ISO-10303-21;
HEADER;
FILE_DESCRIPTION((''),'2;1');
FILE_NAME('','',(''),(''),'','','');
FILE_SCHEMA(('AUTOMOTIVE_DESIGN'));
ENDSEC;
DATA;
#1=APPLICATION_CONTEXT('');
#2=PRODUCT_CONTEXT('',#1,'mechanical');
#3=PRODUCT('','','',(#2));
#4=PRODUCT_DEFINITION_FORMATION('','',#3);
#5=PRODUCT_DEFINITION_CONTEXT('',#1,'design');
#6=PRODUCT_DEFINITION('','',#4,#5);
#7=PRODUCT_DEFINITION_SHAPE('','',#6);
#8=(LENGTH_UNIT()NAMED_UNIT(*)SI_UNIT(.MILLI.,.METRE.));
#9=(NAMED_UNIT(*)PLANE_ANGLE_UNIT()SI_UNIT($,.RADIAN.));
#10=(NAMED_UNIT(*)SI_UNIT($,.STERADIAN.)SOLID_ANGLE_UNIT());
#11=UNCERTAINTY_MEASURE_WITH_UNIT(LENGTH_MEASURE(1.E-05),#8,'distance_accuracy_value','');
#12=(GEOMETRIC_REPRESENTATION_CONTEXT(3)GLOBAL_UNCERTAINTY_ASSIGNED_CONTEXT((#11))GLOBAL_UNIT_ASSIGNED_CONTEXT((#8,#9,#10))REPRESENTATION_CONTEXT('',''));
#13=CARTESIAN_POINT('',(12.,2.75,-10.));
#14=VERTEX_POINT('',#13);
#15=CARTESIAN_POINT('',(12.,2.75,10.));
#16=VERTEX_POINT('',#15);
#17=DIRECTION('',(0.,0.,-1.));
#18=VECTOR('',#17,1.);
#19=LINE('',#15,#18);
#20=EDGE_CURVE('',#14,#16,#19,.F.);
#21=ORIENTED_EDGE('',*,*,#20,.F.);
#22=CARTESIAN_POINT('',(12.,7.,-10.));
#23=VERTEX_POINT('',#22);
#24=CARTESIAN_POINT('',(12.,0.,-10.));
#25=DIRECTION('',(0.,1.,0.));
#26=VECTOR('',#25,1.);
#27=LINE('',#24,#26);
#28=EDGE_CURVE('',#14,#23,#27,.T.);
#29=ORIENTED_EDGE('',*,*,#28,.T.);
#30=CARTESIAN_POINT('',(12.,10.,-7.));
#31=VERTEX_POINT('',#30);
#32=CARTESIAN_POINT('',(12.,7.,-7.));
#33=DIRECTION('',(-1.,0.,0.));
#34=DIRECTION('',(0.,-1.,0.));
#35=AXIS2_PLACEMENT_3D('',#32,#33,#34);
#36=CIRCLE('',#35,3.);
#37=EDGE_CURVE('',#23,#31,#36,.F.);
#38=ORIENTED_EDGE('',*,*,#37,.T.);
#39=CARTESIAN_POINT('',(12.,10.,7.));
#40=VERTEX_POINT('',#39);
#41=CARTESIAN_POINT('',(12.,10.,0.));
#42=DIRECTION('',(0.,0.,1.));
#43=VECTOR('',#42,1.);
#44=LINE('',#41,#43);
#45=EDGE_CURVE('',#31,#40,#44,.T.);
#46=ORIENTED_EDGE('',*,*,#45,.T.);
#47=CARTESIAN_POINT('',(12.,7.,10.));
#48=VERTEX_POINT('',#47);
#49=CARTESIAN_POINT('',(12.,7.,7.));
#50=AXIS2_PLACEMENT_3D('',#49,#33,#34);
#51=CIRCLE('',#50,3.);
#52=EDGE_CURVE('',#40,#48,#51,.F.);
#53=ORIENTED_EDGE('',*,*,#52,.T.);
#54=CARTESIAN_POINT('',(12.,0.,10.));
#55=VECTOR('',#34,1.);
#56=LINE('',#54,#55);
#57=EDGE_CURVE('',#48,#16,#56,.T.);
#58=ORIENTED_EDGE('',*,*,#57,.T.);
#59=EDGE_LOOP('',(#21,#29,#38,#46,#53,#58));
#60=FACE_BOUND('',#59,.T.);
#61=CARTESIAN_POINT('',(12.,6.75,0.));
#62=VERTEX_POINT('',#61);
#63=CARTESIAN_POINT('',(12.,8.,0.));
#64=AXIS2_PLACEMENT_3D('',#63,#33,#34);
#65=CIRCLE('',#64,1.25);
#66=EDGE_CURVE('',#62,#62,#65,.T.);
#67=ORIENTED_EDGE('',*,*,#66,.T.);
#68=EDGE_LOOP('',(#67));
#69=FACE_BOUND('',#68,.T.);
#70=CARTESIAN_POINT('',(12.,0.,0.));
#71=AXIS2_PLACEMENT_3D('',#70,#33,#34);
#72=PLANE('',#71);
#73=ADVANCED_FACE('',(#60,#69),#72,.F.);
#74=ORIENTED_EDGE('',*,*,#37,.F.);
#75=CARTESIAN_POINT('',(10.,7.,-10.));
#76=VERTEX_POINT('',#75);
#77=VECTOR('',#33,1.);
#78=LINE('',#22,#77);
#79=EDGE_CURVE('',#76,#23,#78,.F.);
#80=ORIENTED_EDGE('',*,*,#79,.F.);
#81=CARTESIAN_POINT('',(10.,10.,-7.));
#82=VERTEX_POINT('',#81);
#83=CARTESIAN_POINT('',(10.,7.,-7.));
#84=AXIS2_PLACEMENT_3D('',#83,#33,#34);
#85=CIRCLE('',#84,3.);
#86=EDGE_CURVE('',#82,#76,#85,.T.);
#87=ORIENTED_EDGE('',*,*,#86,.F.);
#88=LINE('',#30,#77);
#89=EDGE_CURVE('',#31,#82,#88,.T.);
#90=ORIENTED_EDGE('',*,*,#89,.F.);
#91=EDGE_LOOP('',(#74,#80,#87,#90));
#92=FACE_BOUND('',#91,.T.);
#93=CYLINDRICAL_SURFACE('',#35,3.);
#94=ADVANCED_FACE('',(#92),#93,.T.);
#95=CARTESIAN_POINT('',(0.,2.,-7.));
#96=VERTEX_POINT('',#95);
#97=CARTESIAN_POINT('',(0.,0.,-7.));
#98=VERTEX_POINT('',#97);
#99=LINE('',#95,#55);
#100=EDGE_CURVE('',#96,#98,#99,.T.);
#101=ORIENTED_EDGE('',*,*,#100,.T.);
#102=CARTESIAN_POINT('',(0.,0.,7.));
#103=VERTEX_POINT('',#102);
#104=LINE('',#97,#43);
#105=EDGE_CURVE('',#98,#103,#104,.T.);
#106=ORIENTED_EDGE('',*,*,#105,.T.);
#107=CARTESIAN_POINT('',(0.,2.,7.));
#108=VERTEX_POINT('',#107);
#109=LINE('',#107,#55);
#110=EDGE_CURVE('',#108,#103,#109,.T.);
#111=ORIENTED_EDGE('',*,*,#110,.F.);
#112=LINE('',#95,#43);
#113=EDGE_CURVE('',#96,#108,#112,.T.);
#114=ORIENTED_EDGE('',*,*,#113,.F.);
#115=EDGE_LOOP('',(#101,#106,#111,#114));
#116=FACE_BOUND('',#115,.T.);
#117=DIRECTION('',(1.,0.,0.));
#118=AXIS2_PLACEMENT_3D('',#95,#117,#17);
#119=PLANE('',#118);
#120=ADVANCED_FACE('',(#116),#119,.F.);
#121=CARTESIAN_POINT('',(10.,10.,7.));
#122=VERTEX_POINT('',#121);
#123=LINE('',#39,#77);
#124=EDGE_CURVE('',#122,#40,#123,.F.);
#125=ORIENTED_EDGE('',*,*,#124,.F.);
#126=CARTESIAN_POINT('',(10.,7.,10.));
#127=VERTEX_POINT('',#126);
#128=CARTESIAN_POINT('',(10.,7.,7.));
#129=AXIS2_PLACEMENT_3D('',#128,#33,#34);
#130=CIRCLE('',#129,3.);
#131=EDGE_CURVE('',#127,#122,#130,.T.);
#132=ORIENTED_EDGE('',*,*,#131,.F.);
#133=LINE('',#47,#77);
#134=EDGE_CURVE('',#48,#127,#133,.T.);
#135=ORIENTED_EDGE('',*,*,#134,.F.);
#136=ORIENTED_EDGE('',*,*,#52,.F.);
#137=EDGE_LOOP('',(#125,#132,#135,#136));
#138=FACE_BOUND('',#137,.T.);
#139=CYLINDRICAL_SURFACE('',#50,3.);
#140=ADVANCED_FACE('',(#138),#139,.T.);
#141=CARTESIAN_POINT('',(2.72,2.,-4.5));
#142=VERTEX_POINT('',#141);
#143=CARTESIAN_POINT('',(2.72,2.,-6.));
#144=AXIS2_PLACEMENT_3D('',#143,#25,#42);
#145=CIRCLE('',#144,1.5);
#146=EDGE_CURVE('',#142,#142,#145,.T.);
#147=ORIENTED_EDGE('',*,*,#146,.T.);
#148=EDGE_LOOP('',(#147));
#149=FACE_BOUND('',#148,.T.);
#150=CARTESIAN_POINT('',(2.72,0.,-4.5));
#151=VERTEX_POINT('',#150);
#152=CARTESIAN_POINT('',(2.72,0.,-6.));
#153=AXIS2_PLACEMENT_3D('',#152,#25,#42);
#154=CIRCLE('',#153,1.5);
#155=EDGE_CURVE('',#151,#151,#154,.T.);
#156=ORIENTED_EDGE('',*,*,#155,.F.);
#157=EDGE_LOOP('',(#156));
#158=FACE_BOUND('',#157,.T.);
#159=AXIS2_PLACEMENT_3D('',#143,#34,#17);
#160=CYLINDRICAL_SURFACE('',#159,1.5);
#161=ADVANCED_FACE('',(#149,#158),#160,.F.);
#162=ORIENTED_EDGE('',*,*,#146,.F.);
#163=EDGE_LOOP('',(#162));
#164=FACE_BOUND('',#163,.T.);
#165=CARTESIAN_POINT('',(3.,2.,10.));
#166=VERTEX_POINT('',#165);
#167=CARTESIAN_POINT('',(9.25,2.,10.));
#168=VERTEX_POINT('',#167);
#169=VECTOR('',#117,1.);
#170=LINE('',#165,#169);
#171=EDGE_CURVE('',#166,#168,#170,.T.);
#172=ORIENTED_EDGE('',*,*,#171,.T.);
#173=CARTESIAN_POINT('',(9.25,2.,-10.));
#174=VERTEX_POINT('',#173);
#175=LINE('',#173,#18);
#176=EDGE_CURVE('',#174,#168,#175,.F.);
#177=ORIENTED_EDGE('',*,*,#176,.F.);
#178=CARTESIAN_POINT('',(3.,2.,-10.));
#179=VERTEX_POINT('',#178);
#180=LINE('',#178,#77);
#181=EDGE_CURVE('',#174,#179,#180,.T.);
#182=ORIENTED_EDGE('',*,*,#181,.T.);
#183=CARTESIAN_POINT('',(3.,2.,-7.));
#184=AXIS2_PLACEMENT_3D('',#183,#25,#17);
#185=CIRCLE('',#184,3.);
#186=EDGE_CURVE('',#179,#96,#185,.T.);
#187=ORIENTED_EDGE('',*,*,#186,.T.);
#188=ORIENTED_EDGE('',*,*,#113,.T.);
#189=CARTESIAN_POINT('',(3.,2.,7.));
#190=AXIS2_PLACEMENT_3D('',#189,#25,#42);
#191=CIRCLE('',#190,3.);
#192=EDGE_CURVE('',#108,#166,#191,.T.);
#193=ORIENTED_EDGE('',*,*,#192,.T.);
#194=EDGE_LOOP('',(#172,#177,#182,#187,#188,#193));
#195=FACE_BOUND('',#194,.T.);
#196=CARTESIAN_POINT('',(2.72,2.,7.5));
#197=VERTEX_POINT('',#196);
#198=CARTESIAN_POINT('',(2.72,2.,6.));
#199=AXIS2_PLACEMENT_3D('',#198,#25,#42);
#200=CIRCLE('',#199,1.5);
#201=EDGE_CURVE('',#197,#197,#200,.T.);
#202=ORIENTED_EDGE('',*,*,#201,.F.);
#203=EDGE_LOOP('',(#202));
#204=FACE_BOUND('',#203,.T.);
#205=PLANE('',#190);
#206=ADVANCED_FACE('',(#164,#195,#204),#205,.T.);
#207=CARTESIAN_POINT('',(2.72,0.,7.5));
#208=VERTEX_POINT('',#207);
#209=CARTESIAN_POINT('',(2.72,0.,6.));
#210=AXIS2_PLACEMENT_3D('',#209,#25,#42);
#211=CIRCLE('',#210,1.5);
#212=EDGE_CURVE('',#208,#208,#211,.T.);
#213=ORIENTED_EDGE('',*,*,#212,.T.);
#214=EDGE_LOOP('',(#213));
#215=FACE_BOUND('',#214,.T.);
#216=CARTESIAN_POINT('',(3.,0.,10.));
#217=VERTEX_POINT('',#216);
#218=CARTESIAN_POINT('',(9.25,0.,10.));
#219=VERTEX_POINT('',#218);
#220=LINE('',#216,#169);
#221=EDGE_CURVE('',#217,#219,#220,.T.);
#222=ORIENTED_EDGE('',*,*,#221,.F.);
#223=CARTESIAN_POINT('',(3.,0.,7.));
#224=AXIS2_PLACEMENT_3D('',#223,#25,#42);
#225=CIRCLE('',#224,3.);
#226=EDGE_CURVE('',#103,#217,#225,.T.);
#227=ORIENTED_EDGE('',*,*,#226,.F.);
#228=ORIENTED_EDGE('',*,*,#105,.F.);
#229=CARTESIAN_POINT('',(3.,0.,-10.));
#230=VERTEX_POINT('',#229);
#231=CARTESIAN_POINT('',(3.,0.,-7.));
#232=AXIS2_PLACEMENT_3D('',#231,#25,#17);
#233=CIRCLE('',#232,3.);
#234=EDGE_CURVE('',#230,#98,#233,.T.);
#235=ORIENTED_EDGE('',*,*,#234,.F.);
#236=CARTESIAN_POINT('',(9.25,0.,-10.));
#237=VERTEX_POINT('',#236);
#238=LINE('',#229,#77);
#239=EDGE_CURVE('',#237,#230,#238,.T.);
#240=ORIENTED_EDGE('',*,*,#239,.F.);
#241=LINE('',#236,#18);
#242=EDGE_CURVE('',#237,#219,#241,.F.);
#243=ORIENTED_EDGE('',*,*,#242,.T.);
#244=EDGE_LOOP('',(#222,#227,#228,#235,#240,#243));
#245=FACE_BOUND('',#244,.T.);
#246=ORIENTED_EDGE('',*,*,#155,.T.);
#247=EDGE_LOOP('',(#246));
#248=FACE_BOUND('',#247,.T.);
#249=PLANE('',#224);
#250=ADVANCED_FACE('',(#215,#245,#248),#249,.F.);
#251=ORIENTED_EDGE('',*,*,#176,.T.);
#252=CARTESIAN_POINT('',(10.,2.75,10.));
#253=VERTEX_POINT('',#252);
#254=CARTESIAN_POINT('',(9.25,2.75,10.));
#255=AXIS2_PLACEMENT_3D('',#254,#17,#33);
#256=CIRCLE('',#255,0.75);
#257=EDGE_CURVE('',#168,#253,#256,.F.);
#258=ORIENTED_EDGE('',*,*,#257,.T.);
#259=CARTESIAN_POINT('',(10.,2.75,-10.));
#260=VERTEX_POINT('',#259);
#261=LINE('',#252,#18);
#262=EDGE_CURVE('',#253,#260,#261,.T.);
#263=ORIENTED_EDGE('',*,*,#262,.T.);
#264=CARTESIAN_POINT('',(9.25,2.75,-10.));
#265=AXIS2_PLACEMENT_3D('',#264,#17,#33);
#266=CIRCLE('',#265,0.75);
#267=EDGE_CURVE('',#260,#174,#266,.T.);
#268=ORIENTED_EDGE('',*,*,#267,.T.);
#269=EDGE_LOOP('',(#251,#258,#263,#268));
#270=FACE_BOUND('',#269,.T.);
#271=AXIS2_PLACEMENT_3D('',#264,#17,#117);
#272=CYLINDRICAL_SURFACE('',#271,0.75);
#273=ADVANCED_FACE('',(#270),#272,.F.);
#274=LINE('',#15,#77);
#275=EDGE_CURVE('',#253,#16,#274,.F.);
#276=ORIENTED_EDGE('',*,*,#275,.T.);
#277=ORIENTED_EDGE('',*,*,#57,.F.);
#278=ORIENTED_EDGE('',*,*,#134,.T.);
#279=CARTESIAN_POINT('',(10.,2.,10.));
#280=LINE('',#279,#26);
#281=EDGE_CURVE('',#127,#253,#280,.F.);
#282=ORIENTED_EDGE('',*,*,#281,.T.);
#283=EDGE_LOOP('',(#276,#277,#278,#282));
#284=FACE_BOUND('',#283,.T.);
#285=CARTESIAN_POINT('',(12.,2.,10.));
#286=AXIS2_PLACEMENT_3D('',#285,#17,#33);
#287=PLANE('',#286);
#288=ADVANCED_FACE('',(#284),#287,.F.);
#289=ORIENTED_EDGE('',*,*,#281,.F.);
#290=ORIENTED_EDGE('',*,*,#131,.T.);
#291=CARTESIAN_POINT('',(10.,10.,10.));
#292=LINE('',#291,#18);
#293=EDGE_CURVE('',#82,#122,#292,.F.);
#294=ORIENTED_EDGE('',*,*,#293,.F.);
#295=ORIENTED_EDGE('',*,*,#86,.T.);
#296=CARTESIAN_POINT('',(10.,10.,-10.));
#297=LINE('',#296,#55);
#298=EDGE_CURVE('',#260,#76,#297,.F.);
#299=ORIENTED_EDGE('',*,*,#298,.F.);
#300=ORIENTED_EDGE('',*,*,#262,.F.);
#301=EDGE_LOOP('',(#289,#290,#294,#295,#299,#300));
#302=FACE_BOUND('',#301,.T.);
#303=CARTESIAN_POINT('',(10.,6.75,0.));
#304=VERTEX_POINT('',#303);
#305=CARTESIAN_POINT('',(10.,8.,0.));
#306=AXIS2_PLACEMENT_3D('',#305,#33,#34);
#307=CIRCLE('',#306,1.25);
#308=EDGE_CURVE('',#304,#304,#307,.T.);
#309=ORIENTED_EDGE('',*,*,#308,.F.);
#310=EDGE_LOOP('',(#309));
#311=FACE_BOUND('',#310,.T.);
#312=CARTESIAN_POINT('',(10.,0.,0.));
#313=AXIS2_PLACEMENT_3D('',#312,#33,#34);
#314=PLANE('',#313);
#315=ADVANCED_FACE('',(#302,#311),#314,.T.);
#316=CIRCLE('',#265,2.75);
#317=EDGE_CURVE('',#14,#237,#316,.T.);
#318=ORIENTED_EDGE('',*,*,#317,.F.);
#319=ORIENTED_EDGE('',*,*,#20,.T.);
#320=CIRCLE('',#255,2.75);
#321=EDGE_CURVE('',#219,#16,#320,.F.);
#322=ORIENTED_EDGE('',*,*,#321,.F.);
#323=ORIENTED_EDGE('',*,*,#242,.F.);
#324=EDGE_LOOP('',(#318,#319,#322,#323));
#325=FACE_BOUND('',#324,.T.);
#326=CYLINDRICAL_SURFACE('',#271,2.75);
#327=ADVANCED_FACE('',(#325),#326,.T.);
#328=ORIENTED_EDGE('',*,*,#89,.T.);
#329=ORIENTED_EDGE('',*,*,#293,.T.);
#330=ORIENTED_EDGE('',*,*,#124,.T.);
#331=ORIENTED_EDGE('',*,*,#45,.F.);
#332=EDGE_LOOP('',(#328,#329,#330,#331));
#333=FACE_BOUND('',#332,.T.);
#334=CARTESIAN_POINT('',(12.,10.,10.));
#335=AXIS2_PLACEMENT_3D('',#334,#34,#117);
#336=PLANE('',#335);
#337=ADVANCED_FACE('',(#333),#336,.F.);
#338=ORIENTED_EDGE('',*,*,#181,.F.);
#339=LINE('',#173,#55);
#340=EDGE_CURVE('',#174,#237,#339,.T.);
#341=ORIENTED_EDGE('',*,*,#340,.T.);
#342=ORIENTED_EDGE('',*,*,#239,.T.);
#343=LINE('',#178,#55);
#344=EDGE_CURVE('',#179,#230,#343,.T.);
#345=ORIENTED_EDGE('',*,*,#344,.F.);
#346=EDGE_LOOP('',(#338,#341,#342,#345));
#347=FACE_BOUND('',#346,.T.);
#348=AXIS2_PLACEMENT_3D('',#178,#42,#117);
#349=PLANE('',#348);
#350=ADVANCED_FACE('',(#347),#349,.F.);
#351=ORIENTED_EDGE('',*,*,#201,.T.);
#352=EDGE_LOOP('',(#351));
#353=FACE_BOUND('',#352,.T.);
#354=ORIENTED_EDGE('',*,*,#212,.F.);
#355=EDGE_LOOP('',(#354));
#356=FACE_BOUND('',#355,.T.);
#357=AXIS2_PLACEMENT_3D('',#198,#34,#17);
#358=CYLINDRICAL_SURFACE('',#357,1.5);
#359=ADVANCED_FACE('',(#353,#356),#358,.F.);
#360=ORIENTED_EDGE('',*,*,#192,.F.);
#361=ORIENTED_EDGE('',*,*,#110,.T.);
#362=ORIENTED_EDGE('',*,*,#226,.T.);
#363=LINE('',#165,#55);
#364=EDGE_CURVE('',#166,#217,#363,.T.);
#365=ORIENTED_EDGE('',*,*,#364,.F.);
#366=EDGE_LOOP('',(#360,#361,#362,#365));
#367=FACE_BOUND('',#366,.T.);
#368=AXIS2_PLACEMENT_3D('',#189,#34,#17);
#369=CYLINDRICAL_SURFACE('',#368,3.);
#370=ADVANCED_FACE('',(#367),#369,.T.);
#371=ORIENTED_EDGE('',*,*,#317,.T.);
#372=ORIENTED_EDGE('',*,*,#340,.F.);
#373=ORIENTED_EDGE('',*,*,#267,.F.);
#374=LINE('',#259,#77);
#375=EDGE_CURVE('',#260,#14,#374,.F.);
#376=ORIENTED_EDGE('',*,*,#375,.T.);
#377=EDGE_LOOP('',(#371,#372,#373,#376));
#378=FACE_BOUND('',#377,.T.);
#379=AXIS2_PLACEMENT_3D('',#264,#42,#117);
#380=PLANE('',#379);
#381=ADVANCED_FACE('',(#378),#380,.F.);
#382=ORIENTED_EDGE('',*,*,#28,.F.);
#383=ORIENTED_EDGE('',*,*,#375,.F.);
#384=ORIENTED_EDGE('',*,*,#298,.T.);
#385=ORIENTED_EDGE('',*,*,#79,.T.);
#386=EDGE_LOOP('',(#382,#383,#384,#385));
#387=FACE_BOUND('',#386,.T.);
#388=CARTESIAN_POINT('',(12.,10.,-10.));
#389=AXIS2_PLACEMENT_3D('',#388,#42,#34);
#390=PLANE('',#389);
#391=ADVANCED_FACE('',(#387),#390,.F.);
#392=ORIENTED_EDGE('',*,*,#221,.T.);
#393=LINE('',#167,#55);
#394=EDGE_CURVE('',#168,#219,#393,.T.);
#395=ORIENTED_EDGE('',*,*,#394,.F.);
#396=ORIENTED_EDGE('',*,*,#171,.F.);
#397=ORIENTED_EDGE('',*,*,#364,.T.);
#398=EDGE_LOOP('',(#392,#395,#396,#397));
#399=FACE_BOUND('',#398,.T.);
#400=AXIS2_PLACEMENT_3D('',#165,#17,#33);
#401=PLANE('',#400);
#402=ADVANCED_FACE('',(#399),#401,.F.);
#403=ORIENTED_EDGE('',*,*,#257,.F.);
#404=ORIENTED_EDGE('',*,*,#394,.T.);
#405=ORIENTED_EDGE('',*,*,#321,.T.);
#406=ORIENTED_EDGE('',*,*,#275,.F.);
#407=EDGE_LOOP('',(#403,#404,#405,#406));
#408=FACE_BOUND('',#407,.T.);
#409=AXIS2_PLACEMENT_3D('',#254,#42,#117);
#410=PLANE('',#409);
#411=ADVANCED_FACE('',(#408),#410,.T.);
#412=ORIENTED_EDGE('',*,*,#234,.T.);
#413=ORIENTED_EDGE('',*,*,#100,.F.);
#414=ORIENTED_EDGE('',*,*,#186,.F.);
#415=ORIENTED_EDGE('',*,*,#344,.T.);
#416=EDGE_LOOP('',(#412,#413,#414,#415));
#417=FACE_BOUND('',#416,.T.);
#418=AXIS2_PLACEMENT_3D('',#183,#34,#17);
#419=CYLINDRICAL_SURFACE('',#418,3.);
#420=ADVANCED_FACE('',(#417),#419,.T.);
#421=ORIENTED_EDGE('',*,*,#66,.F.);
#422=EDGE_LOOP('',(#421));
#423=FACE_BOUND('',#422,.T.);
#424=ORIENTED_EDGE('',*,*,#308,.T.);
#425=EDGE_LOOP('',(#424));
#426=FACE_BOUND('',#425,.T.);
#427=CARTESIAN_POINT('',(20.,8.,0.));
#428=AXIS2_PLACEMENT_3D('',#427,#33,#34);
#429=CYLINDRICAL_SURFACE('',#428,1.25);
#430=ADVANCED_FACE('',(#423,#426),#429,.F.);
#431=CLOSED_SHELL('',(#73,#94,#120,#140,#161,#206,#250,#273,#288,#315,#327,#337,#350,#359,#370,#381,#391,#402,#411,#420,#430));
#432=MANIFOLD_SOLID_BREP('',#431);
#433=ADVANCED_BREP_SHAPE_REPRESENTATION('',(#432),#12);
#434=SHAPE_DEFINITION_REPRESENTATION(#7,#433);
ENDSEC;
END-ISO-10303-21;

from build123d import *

# Parameters (mm, degrees)
SKETCH1_R                    = 1.5
BASE_FLANGE1_DEPTH           = 2
EDGE_FLANGE1_STRIP_W         = 9.5
EDGE_FLANGE1_STRIP_H         = 2
EDGE_FLANGE1_STRIP_CUT_DEPTH = 20
EDGE_FLANGE1_DEPTH           = 20
SKETCH9_R                    = 1.25
CUT_EXTRUDE1_DEPTH           = 10
FILLET1_R                    = 3


# Sheet-metal steps are written as plain solids
with BuildPart() as part:
    # Sketch1 → Base-Flange1 (new body)
    with BuildSketch(Plane(origin=(0, 0, 0), x_dir=(1, 0, 0), z_dir=(0, 1, 0))):
        with BuildLine():
            Line((0, 7), (0, -7))
            ThreePointArc((0, -7), (0.878679656, -9.121320344), (3, -10))
            Line((3, -10), (12, -10))
            Line((12, -10), (12, 10))
            Line((12, 10), (3, 10))
            ThreePointArc((3, 10), (0.878679656, 9.121320344), (0, 7))
        make_face()
        with Locations(Location((2.72, 6, 0), (0, 0, 270))):
            Circle(SKETCH1_R, mode=Mode.SUBTRACT)
        with Locations(Location((2.72, -6, 0), (0, 0, 270))):
            Circle(SKETCH1_R, mode=Mode.SUBTRACT)
    extrude(amount=BASE_FLANGE1_DEPTH)

    # Edge-Flange1 strip (across the edge) → Edge-Flange1 strip cut (cut)
    with BuildSketch(Plane(origin=(12, 2, 10), x_dir=(-1, 0, 0), z_dir=(0, 0, -1))):
        with Locations((-2, -1)):
            Rectangle(EDGE_FLANGE1_STRIP_W, EDGE_FLANGE1_STRIP_H)
    extrude(amount=EDGE_FLANGE1_STRIP_CUT_DEPTH, mode=Mode.SUBTRACT)

    # Edge-Flange1 section (across the edge) → Edge-Flange1 (add)
    with BuildSketch(Plane(origin=(12, 2, 10), x_dir=(-1, 0, 0), z_dir=(0, 0, -1))):
        with BuildLine():
            Line((0, 0.75), (0, 8))
            Line((0, 8), (2, 8))
            Line((2, 8), (2, 0.75))
            ThreePointArc((2, 0.75), (2.219669914, 0.219669914), (2.75, 0))
            Line((2.75, 0), (2.75, -2))
            ThreePointArc((2.75, -2), (0.805456352, -1.194543648), (0, 0.75))
        make_face()
    extrude(amount=EDGE_FLANGE1_DEPTH)

    # Sketch9 → Cut-Extrude1 (cut)
    with BuildSketch(Plane.ZY.offset(-10)):
        with Locations(Location((0, 8, 0), (0, 0, 270))):
            Circle(SKETCH9_R)
    extrude(amount=-CUT_EXTRUDE1_DEPTH, mode=Mode.SUBTRACT)

    # Fillet1
    fillet1_edges = [part.edges().sort_by_distance(p)[0] for p in [
        (11, 10, 10),
        (11, 10, -10),
    ]]
    fillet(fillet1_edges, radius=FILLET1_R)


solid = part.part
